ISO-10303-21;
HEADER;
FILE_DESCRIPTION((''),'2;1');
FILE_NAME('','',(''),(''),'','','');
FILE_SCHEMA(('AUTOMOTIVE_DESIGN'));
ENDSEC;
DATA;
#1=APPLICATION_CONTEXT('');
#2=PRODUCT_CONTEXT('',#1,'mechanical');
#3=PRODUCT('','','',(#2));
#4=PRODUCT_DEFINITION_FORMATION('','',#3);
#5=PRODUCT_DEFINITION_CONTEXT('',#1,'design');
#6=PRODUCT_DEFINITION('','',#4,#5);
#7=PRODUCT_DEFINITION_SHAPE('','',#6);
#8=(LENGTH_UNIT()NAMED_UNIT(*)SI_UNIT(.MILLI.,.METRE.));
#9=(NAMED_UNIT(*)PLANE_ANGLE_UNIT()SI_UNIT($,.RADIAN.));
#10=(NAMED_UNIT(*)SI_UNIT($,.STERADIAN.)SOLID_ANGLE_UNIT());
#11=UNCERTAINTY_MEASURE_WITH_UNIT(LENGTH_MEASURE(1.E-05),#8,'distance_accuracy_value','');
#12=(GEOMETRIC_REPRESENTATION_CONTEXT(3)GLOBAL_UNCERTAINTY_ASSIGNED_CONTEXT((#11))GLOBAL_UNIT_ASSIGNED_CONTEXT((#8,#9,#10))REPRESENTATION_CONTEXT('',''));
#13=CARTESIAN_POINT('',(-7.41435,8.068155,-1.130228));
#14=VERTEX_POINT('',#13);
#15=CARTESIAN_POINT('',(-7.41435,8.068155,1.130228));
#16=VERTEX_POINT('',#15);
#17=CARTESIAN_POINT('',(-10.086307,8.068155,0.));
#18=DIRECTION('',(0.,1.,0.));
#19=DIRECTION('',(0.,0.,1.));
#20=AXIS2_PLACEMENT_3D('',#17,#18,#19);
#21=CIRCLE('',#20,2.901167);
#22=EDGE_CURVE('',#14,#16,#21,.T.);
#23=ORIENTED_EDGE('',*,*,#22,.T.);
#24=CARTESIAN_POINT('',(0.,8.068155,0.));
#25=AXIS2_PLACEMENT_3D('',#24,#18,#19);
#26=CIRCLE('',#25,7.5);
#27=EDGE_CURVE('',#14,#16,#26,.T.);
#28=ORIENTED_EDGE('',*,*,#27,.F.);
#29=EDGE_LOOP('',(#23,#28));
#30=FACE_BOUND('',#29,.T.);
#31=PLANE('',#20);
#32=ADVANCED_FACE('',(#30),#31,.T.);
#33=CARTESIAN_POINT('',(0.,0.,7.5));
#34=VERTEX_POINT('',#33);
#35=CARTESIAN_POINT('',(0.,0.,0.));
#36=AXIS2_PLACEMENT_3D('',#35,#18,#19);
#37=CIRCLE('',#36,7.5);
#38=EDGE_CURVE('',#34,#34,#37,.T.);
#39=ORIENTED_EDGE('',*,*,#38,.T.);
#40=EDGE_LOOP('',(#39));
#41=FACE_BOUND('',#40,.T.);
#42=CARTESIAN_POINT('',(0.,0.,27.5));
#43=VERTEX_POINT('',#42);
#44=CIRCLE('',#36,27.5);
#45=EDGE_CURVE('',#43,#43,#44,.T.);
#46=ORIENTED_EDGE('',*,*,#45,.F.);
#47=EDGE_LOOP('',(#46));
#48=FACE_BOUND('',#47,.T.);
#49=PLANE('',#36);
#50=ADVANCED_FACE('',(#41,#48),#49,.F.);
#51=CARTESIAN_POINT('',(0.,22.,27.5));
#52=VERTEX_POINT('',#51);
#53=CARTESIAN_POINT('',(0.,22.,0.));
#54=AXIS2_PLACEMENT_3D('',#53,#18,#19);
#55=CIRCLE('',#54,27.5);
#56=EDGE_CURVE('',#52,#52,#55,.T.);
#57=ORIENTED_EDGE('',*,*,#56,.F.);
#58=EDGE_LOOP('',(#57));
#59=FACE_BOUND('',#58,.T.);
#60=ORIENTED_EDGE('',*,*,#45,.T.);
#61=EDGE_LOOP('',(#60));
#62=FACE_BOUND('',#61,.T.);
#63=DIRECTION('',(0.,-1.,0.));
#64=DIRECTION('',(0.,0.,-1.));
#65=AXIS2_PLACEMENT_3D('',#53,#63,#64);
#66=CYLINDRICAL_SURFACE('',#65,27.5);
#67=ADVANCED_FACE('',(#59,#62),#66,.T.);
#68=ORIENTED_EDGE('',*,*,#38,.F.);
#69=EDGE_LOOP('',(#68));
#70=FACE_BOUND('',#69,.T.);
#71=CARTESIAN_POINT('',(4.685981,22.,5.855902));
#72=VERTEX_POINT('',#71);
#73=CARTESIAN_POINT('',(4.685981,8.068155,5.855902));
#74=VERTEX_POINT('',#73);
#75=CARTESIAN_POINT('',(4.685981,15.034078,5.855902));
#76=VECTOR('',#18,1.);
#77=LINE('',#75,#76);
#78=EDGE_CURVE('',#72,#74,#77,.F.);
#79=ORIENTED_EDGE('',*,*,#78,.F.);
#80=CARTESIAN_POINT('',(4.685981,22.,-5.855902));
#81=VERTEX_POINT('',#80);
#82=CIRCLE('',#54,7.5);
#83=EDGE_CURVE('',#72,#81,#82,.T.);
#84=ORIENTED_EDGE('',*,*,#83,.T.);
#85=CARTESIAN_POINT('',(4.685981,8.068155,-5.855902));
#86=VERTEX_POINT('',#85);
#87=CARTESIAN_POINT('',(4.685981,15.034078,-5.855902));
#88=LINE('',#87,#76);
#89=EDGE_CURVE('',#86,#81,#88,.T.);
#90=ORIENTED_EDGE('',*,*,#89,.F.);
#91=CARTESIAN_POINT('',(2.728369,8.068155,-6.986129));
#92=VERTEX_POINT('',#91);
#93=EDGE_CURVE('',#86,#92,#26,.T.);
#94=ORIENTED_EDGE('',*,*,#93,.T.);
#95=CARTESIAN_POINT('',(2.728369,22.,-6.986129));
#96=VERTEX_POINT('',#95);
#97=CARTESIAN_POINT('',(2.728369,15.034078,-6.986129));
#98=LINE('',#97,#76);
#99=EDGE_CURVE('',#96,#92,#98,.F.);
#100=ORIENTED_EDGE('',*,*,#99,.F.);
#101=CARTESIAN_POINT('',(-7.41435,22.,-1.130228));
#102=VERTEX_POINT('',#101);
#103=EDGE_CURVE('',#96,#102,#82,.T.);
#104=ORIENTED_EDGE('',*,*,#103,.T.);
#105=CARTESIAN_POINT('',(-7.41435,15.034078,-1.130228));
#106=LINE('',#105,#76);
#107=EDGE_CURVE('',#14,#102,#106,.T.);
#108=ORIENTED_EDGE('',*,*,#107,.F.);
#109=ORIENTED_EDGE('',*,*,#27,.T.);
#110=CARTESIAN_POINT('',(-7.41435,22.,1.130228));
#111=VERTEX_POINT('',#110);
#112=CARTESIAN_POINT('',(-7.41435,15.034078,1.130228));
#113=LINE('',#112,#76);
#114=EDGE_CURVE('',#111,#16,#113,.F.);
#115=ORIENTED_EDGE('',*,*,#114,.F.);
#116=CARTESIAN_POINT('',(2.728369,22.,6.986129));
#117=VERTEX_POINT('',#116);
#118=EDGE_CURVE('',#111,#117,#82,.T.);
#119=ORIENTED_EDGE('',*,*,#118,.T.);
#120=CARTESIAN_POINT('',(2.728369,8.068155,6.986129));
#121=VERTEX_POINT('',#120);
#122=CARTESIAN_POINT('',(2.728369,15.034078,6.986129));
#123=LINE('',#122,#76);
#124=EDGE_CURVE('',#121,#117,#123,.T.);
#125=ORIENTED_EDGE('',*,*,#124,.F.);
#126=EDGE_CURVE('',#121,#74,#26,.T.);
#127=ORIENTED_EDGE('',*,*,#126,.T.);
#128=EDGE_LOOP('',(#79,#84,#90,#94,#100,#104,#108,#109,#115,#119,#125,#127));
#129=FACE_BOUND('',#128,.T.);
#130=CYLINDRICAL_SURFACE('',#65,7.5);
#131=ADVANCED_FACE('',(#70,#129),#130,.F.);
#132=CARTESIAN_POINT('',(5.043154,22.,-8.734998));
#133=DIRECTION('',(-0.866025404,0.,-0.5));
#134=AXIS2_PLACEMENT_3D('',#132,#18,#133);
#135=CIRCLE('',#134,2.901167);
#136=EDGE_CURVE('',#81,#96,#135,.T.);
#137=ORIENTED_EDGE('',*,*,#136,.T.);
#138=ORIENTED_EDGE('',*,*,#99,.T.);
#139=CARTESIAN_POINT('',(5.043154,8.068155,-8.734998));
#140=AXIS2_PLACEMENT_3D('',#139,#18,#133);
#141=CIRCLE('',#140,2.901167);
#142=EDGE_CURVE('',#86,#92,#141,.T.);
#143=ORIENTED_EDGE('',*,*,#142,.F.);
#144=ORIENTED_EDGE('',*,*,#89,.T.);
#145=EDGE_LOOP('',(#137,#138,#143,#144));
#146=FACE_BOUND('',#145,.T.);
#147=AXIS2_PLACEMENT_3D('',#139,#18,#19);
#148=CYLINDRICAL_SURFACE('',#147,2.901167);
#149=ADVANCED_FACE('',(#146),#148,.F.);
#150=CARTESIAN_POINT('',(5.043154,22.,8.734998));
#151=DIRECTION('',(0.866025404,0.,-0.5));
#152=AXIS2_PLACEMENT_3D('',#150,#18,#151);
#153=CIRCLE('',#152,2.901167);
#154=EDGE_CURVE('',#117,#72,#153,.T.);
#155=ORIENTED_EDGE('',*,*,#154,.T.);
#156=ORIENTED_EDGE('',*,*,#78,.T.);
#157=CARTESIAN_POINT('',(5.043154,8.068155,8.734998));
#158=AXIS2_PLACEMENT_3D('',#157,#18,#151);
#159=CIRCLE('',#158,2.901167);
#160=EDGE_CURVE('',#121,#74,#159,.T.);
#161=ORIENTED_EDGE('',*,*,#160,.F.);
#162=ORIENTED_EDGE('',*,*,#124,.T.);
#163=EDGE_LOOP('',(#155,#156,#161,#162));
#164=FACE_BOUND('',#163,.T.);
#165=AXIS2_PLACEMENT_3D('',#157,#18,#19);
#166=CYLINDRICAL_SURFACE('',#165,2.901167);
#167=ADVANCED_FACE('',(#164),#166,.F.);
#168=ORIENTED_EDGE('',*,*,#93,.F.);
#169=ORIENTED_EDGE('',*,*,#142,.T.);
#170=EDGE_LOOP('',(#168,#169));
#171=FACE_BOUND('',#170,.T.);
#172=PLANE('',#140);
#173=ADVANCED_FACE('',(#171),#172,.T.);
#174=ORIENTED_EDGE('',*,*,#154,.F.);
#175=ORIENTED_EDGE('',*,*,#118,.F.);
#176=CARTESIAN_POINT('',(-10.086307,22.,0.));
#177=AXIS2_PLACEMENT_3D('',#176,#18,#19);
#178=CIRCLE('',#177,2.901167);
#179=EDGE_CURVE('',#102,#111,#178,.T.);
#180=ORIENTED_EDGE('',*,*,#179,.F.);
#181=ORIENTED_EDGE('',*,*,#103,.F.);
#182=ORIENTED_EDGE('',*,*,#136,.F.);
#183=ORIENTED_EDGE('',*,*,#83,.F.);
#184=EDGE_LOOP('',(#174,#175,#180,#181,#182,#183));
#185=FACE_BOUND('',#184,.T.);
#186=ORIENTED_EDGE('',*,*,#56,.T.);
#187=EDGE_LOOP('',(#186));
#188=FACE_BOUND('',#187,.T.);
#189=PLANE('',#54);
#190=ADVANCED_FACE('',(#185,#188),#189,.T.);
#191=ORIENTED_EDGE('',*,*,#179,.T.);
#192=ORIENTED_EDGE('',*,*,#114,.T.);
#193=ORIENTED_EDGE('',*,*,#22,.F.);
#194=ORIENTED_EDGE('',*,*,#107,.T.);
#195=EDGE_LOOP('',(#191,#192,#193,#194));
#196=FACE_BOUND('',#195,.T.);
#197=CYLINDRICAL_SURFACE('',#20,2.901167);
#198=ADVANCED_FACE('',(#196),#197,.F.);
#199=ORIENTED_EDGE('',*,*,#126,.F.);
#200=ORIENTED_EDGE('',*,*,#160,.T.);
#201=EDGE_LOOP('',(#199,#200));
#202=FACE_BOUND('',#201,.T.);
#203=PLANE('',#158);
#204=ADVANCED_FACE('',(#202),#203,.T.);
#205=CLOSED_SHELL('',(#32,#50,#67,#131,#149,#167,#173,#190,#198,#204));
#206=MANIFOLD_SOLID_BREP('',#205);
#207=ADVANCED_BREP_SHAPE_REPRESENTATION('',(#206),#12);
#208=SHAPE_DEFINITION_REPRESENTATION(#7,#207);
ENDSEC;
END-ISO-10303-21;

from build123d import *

# Parameters (mm, degrees)
SKETCH1_R           = 27.5
BOSS_EXTRUDE1_DEPTH = 22
SKETCH2_R           = 7.5
CUT_EXTRUDE1_DEPTH  = 45.682211225
SKETCH3_R           = 2.901166918
CUT_EXTRUDE2_DEPTH  = 13.931844884
CIRPATTERN1_COUNT   = 3


with BuildPart() as part:
    # Sketch1 → Boss-Extrude1 (new body)
    with BuildSketch(Plane(origin=(0, 0, 0), x_dir=(1, 0, 0), z_dir=(0, 1, 0))):
        Circle(SKETCH1_R)
    extrude(amount=BOSS_EXTRUDE1_DEPTH)

    # Sketch2 → Cut-Extrude1 (cut, through all)
    with BuildSketch(Plane(origin=(0, 0, 0), x_dir=(1, 0, 0), z_dir=(0, 1, 0))):
        Circle(SKETCH2_R)
    extrude(amount=CUT_EXTRUDE1_DEPTH, mode=Mode.SUBTRACT)

    # Sketch3 → Cut-Extrude2 (cut)
    with BuildSketch(Plane(origin=(0, 22, 0), x_dir=(1, 0, 0), z_dir=(0, 1, 0))):
        with Locations((-10.086307096, 0)):
            Circle(SKETCH3_R)
    cut_extrude2 = extrude(amount=-CUT_EXTRUDE2_DEPTH, mode=Mode.SUBTRACT)

    # CirPattern1: Cut-Extrude2 ×3 about axis
    cirpattern1_axis = Axis((0, 0, 0), (0, 1, 0))
    for i in range(1, CIRPATTERN1_COUNT):
        add(cut_extrude2.rotate(cirpattern1_axis, i * 360 / CIRPATTERN1_COUNT), mode=Mode.SUBTRACT)


solid = part.part
